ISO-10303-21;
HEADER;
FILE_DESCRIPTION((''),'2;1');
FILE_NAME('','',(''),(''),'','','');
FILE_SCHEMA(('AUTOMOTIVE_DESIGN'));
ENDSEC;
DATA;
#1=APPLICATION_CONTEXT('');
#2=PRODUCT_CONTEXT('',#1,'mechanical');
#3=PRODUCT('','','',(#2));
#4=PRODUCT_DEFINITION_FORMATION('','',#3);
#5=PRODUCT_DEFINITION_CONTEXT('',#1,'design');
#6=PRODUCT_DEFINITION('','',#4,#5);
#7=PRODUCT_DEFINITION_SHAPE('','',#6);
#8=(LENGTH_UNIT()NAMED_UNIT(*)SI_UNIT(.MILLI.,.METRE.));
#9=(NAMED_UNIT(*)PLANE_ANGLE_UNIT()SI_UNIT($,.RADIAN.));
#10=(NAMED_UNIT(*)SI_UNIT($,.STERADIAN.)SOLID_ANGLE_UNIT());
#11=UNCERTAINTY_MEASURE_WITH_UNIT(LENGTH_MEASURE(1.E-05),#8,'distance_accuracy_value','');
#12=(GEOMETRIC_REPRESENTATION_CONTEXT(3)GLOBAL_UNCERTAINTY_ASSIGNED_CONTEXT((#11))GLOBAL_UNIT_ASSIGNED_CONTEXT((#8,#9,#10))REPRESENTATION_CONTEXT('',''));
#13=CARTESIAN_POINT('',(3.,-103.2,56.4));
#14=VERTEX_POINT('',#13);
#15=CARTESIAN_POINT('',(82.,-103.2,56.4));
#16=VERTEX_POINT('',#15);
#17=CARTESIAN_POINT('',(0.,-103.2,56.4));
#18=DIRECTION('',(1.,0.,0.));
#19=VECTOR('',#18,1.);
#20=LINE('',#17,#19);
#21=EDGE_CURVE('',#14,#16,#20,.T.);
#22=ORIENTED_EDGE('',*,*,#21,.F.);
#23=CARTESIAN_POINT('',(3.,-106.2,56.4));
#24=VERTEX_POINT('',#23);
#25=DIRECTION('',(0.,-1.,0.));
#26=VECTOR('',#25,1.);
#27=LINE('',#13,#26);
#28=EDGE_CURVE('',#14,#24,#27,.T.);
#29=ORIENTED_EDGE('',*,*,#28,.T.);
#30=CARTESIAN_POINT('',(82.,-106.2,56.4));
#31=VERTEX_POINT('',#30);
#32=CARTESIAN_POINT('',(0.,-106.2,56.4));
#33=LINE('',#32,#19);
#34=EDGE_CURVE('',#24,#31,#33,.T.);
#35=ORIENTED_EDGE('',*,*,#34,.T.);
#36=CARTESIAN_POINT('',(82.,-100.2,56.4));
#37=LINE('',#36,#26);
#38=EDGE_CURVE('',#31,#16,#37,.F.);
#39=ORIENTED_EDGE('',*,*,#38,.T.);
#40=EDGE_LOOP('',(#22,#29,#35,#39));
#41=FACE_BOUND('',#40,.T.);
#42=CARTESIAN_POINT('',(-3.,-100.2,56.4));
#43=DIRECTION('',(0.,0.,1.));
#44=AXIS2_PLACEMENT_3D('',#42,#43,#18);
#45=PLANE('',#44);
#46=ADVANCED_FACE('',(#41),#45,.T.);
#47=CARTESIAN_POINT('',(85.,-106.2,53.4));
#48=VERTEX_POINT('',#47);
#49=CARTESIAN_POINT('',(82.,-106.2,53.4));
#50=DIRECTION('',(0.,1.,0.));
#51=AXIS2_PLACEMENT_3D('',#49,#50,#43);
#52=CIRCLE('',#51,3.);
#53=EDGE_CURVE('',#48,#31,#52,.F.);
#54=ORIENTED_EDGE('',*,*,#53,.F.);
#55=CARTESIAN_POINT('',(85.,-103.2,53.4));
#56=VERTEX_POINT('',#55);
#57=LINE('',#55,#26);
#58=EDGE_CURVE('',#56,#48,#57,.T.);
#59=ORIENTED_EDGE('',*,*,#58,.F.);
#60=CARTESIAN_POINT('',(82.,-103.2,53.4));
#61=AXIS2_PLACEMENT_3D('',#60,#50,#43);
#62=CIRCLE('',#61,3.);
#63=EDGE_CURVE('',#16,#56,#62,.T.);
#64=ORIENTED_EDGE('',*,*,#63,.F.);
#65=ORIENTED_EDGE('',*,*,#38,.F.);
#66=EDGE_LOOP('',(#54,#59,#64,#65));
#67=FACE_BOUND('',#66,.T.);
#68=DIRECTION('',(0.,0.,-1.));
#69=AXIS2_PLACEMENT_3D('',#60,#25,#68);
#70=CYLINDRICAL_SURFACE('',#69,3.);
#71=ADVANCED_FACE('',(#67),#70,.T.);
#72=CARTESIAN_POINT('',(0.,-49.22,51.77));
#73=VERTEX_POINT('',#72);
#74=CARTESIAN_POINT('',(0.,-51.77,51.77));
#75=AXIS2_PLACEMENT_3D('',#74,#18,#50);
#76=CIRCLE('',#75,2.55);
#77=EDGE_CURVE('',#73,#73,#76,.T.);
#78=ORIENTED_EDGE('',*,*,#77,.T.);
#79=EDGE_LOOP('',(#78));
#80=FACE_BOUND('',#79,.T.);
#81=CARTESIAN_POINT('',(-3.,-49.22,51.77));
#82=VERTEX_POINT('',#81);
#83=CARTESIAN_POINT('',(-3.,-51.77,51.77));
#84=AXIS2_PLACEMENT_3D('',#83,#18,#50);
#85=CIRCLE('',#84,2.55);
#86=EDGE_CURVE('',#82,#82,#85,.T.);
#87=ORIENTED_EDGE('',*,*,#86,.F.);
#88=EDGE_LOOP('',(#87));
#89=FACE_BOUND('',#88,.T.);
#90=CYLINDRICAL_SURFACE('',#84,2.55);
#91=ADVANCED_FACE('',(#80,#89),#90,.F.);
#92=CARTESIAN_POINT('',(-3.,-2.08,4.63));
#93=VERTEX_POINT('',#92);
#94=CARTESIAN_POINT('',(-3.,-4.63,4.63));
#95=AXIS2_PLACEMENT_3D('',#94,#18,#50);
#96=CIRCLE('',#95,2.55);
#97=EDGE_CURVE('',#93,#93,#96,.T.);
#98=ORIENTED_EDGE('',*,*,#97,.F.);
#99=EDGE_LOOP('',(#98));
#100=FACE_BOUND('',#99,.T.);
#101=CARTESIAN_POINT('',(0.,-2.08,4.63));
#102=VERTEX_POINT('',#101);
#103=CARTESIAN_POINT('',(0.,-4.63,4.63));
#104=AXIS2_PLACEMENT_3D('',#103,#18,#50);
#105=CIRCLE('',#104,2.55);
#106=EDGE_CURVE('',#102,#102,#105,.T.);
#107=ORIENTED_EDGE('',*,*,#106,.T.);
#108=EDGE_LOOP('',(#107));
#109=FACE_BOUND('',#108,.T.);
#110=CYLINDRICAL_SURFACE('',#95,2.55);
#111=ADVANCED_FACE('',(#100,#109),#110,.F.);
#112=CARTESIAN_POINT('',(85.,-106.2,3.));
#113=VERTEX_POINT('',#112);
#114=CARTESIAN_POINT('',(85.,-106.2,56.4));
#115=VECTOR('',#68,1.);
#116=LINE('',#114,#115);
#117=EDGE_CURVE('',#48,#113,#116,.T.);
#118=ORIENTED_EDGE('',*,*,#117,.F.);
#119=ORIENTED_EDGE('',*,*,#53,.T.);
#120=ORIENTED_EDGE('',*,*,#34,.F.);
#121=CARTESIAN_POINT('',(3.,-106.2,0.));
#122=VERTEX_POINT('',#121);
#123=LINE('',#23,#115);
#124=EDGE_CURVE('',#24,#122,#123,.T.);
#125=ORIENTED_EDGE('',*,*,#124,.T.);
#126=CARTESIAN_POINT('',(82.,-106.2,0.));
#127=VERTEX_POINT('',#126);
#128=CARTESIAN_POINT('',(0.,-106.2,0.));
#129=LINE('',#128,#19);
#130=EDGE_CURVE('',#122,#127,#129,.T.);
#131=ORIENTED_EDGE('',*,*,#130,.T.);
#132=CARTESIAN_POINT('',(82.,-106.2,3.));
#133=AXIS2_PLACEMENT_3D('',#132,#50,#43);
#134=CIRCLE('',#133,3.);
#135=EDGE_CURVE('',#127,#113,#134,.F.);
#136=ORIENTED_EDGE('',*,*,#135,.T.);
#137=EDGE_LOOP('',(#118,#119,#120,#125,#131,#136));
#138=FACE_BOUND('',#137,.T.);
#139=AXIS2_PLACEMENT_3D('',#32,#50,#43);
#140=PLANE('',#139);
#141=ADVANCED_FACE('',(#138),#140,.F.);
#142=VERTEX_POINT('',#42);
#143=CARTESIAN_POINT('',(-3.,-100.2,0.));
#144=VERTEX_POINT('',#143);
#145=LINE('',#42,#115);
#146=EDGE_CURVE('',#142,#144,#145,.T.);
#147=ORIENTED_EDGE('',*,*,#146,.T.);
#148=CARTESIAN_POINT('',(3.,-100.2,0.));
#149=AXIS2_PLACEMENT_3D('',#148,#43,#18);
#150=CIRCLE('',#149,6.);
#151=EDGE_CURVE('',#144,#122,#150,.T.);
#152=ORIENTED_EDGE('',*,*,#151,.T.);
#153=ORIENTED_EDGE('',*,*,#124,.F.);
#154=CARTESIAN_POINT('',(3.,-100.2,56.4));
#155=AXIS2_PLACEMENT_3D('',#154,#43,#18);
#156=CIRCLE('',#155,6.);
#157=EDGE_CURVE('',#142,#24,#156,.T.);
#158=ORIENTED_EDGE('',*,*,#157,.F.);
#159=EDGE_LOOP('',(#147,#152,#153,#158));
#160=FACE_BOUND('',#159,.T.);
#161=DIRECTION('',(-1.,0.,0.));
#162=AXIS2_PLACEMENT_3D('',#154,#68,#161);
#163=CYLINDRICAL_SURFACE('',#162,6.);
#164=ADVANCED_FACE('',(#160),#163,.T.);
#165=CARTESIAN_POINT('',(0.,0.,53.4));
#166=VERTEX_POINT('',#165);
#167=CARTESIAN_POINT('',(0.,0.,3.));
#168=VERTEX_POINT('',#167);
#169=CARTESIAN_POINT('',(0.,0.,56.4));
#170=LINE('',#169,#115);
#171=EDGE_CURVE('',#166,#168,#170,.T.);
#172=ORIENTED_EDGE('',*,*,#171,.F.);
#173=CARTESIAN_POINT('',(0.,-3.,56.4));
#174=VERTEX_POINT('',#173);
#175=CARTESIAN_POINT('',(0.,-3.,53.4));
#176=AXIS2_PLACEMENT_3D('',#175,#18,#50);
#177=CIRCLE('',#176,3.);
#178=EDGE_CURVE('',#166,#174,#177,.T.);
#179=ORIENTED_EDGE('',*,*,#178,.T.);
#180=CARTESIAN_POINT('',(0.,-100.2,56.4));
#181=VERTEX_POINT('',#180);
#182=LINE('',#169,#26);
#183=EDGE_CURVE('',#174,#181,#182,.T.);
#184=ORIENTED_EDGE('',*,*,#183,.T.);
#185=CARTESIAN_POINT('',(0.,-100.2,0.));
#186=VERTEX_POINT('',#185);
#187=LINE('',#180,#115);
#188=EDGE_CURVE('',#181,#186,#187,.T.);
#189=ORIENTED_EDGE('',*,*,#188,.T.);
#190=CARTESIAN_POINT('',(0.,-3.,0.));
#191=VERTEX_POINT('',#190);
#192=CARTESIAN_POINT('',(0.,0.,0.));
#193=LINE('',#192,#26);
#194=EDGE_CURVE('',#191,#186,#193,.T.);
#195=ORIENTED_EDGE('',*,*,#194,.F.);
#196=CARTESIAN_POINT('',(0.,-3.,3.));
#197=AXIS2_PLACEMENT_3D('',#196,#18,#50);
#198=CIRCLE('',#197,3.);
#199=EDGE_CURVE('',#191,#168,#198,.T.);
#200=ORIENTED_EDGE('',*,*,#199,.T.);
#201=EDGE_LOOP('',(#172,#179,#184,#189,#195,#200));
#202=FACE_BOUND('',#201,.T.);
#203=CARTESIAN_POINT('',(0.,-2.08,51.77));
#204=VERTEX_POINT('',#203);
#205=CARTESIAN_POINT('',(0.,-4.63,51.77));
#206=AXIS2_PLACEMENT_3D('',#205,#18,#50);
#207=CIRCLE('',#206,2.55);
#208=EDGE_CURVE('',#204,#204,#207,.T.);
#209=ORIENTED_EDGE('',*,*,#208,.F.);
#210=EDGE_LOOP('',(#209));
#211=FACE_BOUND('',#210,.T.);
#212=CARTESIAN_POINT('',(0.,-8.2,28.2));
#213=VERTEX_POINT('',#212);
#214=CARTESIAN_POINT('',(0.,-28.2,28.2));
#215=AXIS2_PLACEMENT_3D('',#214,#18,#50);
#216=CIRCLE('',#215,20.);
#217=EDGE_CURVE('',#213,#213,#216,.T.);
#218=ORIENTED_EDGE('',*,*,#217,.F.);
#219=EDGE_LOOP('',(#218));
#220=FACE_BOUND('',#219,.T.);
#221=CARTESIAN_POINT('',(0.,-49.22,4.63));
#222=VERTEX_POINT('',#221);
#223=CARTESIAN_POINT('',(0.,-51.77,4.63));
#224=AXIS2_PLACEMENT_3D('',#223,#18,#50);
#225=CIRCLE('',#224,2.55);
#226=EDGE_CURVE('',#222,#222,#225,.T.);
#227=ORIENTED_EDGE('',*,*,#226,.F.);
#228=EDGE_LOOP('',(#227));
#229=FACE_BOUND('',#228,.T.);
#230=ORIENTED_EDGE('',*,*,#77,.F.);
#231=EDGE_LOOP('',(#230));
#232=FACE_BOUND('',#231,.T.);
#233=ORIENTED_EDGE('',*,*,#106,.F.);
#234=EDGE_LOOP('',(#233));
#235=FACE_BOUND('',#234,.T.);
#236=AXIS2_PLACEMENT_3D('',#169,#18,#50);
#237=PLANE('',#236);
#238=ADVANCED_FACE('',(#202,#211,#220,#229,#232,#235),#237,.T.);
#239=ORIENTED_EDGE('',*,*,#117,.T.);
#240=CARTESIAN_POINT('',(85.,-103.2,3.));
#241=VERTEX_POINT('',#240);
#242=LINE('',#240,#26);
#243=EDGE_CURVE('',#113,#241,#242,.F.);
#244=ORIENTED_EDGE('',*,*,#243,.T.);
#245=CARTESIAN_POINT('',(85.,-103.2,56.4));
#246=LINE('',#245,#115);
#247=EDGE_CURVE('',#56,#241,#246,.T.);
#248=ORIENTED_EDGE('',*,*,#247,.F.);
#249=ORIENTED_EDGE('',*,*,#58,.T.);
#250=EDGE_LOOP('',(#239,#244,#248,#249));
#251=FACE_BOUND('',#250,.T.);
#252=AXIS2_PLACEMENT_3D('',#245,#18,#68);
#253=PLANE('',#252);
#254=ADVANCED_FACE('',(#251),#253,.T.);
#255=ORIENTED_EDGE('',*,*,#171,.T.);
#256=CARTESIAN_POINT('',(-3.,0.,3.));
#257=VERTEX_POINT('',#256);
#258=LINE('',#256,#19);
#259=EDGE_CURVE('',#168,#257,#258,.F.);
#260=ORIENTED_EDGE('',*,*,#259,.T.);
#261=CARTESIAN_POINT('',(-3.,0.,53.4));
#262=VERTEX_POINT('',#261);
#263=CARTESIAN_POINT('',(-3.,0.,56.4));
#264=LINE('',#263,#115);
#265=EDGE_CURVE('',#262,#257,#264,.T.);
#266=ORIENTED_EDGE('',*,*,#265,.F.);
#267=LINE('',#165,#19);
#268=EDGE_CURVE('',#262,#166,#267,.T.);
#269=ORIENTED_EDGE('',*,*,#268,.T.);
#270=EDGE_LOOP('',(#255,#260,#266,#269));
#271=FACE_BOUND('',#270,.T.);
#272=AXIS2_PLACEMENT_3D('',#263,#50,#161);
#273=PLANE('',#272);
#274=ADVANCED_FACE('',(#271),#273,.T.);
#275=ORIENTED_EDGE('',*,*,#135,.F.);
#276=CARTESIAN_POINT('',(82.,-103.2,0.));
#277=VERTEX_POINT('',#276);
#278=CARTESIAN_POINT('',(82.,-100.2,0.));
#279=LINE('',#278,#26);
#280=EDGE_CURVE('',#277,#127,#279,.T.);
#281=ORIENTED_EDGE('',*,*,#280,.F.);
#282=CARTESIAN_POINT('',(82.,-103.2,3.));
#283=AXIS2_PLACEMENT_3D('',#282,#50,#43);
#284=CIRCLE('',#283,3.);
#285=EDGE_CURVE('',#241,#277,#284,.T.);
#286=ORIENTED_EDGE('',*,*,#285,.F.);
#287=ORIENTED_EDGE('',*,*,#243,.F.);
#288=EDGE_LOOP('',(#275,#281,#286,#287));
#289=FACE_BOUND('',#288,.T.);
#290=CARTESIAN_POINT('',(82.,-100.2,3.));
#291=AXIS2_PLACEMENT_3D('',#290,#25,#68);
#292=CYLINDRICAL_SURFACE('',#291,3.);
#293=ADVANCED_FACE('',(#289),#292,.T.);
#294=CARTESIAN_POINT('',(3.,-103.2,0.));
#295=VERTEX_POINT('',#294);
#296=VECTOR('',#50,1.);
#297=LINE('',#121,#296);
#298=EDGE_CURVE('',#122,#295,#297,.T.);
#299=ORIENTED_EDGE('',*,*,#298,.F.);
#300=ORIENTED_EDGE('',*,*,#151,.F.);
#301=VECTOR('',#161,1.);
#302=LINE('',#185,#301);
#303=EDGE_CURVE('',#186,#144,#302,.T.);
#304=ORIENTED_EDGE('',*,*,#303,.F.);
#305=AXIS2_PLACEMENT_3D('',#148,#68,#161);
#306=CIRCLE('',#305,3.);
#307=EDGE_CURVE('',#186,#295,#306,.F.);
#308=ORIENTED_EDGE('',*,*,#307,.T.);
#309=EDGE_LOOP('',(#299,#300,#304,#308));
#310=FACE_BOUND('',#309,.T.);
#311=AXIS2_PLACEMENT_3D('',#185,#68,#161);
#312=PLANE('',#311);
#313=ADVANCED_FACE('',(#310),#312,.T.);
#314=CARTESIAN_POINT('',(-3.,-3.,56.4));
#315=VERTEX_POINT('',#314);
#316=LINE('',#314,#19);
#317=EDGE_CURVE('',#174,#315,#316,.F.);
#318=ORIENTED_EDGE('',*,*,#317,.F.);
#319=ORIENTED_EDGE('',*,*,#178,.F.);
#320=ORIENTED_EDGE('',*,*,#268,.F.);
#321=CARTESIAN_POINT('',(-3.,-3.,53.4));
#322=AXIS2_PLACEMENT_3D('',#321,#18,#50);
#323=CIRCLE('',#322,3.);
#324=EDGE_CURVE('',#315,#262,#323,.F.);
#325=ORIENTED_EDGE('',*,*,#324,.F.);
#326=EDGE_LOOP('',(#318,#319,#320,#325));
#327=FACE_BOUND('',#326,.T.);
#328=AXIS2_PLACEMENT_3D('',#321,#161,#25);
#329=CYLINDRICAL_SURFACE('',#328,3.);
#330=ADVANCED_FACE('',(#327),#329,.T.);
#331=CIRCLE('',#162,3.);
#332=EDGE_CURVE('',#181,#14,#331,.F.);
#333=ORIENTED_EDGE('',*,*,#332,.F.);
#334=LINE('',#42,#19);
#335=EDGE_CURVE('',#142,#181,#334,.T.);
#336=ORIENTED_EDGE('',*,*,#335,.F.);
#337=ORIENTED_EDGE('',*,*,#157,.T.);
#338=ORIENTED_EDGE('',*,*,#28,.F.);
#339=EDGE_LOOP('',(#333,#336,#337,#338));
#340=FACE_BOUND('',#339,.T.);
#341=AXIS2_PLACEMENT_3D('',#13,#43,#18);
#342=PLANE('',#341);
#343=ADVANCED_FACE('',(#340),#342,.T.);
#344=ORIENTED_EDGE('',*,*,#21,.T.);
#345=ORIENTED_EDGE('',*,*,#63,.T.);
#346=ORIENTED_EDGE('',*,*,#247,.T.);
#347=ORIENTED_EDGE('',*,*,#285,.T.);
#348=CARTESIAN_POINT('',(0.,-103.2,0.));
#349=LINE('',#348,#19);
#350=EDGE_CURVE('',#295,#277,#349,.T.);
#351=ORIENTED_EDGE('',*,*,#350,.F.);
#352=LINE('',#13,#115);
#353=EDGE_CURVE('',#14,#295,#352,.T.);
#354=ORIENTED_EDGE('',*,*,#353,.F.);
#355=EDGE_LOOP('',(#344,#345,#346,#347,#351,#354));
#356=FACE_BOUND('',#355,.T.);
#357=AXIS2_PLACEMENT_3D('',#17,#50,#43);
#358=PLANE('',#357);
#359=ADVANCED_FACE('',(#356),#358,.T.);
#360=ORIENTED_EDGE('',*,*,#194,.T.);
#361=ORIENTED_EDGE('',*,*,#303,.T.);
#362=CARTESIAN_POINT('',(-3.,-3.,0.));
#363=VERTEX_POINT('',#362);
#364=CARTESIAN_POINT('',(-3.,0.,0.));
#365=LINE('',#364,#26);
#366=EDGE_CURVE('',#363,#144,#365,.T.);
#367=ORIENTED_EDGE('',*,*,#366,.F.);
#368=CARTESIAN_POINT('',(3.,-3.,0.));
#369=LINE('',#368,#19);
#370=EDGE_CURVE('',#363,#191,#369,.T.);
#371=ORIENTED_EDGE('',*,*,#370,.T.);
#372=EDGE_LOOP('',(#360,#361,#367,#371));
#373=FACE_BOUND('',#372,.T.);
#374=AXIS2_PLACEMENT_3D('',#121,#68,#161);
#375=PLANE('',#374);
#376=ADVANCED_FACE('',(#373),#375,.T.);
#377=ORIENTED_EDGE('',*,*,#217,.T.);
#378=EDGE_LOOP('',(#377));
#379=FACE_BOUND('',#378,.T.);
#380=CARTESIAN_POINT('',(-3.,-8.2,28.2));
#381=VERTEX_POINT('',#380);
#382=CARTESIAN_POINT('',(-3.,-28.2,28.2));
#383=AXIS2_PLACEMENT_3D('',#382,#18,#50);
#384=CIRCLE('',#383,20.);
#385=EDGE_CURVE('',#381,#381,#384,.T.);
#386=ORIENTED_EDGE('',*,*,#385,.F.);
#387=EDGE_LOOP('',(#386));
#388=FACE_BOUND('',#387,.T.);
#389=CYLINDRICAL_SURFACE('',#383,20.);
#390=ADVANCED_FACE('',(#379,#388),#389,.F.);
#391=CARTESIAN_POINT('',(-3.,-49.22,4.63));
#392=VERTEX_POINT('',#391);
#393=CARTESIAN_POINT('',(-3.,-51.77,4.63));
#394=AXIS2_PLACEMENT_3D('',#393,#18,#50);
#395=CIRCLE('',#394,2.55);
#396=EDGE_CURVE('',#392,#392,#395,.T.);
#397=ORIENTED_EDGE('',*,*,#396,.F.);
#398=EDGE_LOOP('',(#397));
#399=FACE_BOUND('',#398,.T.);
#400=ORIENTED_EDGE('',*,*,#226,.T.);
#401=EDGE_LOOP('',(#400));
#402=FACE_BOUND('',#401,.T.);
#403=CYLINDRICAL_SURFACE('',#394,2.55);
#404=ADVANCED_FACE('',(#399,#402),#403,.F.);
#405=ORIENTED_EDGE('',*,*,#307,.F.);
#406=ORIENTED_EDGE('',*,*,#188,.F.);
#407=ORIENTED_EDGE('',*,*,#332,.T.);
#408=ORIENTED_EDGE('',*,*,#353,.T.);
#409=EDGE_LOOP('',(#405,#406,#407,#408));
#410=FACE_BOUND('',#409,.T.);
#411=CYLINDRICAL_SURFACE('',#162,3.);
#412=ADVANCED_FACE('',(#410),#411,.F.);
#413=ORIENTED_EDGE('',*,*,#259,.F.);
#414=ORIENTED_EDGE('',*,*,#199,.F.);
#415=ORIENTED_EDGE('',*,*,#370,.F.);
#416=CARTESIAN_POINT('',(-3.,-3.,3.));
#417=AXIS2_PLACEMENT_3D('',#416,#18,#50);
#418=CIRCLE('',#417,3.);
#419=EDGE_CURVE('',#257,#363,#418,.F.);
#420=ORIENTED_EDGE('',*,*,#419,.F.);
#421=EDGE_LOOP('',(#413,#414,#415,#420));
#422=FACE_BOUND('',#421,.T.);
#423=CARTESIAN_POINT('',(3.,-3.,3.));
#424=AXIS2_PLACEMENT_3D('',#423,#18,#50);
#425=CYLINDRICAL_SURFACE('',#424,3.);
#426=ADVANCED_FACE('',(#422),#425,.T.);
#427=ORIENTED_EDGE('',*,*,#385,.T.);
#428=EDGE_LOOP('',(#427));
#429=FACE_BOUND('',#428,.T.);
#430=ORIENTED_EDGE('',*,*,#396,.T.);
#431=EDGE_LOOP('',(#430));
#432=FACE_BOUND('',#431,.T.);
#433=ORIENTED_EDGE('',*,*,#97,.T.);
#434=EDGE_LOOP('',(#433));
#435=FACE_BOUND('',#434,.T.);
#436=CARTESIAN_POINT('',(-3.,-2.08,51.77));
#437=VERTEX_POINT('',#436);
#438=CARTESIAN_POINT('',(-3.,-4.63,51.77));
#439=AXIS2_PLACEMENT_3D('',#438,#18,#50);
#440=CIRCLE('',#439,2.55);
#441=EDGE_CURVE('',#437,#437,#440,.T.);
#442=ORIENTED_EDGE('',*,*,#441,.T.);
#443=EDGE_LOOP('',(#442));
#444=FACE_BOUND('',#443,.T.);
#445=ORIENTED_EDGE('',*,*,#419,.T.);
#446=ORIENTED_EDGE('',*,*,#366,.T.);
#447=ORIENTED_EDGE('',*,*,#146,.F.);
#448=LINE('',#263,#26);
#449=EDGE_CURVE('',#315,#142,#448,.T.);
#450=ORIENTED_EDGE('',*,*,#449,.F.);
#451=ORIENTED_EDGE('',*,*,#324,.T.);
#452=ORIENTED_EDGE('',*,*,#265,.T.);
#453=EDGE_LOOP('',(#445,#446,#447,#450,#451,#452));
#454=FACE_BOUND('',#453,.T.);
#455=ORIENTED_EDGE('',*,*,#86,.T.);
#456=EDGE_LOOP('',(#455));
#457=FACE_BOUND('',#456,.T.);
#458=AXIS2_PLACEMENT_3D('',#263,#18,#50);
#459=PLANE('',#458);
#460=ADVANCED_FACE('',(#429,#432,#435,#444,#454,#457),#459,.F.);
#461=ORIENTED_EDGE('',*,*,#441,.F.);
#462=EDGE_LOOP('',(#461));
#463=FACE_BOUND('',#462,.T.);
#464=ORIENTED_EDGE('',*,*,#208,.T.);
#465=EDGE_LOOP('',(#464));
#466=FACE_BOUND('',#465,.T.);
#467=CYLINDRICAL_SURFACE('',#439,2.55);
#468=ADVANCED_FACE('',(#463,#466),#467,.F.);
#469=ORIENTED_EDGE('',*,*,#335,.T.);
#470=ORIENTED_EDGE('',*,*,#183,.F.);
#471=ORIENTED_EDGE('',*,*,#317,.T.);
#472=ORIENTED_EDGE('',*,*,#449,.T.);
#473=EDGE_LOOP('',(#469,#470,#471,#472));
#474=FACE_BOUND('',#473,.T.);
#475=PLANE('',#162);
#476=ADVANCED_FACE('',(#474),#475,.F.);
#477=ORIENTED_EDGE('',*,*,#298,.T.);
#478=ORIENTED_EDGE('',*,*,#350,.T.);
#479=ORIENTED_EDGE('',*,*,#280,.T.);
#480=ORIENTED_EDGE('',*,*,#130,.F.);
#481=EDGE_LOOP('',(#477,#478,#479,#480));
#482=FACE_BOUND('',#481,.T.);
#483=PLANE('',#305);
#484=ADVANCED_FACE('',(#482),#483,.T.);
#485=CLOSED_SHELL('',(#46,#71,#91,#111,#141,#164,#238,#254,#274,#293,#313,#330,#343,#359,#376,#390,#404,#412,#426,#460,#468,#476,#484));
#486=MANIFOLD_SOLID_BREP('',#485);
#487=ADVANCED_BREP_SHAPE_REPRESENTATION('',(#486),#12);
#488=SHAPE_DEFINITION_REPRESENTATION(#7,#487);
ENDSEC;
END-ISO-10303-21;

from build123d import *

# Parameters (mm, degrees)
SM_BASE_FLANGE_1_DEPTH = 56.4
FILLET_1_R             = 3
SKETCH_6_R             = 20
SKETCH_6_R_2           = 2.55
CUT_EXTRUDE_1_DEPTH    = 148.256239257


# Sheet-metal steps are written as plain solids
with BuildPart() as part:
    # Sketch 1 → Базовая кромка1 (new body)
    with BuildSketch(Plane.XY):
        with BuildLine():
            Line((0, 0), (0, -100.2))
            ThreePointArc((0, -100.2), (0.878679656, -102.321320344), (3, -103.2))
            Line((3, -103.2), (85, -103.2))
            Line((85, -103.2), (85, -106.2))
            Line((85, -106.2), (3, -106.2))
            ThreePointArc((3, -106.2), (-1.242640687, -104.442640687), (-3, -100.2))
            Line((-3, -100.2), (-3, 0))
            Line((-3, 0), (0, 0))
        make_face()
    extrude(amount=SM_BASE_FLANGE_1_DEPTH)

    # Скругление1
    fillet_1_edges = [part.edges().sort_by_distance(p)[0] for p in [
        (-1.5, 0, 56.4),
        (85, -104.7, 56.4),
        (-1.5, 0, 0),
        (85, -104.7, 0),
    ]]
    fillet(fillet_1_edges, radius=FILLET_1_R)

    # Эскиз6 → Вырез-Вытянуть1 (cut, through all)
    with BuildSketch(Plane(origin=(0, 0, 0), x_dir=(0, 0, -1), z_dir=(1, 0, 0))):
        with Locations(Location((-28.2, -28.2, 0), (0, 0, 90))):
            Circle(SKETCH_6_R)
        with Locations(Location((-51.77, -4.63, 0), (0, 0, 90))):
            Circle(SKETCH_6_R_2)
        with Locations(Location((-4.63, -4.63, 0), (0, 0, 90))):
            Circle(SKETCH_6_R_2)
        with Locations(Location((-4.63, -51.77, 0), (0, 0, 90))):
            Circle(SKETCH_6_R_2)
        with Locations(Location((-51.77, -51.77, 0), (0, 0, 90))):
            Circle(SKETCH_6_R_2)
    extrude(amount=-CUT_EXTRUDE_1_DEPTH, mode=Mode.SUBTRACT)


solid = part.part
